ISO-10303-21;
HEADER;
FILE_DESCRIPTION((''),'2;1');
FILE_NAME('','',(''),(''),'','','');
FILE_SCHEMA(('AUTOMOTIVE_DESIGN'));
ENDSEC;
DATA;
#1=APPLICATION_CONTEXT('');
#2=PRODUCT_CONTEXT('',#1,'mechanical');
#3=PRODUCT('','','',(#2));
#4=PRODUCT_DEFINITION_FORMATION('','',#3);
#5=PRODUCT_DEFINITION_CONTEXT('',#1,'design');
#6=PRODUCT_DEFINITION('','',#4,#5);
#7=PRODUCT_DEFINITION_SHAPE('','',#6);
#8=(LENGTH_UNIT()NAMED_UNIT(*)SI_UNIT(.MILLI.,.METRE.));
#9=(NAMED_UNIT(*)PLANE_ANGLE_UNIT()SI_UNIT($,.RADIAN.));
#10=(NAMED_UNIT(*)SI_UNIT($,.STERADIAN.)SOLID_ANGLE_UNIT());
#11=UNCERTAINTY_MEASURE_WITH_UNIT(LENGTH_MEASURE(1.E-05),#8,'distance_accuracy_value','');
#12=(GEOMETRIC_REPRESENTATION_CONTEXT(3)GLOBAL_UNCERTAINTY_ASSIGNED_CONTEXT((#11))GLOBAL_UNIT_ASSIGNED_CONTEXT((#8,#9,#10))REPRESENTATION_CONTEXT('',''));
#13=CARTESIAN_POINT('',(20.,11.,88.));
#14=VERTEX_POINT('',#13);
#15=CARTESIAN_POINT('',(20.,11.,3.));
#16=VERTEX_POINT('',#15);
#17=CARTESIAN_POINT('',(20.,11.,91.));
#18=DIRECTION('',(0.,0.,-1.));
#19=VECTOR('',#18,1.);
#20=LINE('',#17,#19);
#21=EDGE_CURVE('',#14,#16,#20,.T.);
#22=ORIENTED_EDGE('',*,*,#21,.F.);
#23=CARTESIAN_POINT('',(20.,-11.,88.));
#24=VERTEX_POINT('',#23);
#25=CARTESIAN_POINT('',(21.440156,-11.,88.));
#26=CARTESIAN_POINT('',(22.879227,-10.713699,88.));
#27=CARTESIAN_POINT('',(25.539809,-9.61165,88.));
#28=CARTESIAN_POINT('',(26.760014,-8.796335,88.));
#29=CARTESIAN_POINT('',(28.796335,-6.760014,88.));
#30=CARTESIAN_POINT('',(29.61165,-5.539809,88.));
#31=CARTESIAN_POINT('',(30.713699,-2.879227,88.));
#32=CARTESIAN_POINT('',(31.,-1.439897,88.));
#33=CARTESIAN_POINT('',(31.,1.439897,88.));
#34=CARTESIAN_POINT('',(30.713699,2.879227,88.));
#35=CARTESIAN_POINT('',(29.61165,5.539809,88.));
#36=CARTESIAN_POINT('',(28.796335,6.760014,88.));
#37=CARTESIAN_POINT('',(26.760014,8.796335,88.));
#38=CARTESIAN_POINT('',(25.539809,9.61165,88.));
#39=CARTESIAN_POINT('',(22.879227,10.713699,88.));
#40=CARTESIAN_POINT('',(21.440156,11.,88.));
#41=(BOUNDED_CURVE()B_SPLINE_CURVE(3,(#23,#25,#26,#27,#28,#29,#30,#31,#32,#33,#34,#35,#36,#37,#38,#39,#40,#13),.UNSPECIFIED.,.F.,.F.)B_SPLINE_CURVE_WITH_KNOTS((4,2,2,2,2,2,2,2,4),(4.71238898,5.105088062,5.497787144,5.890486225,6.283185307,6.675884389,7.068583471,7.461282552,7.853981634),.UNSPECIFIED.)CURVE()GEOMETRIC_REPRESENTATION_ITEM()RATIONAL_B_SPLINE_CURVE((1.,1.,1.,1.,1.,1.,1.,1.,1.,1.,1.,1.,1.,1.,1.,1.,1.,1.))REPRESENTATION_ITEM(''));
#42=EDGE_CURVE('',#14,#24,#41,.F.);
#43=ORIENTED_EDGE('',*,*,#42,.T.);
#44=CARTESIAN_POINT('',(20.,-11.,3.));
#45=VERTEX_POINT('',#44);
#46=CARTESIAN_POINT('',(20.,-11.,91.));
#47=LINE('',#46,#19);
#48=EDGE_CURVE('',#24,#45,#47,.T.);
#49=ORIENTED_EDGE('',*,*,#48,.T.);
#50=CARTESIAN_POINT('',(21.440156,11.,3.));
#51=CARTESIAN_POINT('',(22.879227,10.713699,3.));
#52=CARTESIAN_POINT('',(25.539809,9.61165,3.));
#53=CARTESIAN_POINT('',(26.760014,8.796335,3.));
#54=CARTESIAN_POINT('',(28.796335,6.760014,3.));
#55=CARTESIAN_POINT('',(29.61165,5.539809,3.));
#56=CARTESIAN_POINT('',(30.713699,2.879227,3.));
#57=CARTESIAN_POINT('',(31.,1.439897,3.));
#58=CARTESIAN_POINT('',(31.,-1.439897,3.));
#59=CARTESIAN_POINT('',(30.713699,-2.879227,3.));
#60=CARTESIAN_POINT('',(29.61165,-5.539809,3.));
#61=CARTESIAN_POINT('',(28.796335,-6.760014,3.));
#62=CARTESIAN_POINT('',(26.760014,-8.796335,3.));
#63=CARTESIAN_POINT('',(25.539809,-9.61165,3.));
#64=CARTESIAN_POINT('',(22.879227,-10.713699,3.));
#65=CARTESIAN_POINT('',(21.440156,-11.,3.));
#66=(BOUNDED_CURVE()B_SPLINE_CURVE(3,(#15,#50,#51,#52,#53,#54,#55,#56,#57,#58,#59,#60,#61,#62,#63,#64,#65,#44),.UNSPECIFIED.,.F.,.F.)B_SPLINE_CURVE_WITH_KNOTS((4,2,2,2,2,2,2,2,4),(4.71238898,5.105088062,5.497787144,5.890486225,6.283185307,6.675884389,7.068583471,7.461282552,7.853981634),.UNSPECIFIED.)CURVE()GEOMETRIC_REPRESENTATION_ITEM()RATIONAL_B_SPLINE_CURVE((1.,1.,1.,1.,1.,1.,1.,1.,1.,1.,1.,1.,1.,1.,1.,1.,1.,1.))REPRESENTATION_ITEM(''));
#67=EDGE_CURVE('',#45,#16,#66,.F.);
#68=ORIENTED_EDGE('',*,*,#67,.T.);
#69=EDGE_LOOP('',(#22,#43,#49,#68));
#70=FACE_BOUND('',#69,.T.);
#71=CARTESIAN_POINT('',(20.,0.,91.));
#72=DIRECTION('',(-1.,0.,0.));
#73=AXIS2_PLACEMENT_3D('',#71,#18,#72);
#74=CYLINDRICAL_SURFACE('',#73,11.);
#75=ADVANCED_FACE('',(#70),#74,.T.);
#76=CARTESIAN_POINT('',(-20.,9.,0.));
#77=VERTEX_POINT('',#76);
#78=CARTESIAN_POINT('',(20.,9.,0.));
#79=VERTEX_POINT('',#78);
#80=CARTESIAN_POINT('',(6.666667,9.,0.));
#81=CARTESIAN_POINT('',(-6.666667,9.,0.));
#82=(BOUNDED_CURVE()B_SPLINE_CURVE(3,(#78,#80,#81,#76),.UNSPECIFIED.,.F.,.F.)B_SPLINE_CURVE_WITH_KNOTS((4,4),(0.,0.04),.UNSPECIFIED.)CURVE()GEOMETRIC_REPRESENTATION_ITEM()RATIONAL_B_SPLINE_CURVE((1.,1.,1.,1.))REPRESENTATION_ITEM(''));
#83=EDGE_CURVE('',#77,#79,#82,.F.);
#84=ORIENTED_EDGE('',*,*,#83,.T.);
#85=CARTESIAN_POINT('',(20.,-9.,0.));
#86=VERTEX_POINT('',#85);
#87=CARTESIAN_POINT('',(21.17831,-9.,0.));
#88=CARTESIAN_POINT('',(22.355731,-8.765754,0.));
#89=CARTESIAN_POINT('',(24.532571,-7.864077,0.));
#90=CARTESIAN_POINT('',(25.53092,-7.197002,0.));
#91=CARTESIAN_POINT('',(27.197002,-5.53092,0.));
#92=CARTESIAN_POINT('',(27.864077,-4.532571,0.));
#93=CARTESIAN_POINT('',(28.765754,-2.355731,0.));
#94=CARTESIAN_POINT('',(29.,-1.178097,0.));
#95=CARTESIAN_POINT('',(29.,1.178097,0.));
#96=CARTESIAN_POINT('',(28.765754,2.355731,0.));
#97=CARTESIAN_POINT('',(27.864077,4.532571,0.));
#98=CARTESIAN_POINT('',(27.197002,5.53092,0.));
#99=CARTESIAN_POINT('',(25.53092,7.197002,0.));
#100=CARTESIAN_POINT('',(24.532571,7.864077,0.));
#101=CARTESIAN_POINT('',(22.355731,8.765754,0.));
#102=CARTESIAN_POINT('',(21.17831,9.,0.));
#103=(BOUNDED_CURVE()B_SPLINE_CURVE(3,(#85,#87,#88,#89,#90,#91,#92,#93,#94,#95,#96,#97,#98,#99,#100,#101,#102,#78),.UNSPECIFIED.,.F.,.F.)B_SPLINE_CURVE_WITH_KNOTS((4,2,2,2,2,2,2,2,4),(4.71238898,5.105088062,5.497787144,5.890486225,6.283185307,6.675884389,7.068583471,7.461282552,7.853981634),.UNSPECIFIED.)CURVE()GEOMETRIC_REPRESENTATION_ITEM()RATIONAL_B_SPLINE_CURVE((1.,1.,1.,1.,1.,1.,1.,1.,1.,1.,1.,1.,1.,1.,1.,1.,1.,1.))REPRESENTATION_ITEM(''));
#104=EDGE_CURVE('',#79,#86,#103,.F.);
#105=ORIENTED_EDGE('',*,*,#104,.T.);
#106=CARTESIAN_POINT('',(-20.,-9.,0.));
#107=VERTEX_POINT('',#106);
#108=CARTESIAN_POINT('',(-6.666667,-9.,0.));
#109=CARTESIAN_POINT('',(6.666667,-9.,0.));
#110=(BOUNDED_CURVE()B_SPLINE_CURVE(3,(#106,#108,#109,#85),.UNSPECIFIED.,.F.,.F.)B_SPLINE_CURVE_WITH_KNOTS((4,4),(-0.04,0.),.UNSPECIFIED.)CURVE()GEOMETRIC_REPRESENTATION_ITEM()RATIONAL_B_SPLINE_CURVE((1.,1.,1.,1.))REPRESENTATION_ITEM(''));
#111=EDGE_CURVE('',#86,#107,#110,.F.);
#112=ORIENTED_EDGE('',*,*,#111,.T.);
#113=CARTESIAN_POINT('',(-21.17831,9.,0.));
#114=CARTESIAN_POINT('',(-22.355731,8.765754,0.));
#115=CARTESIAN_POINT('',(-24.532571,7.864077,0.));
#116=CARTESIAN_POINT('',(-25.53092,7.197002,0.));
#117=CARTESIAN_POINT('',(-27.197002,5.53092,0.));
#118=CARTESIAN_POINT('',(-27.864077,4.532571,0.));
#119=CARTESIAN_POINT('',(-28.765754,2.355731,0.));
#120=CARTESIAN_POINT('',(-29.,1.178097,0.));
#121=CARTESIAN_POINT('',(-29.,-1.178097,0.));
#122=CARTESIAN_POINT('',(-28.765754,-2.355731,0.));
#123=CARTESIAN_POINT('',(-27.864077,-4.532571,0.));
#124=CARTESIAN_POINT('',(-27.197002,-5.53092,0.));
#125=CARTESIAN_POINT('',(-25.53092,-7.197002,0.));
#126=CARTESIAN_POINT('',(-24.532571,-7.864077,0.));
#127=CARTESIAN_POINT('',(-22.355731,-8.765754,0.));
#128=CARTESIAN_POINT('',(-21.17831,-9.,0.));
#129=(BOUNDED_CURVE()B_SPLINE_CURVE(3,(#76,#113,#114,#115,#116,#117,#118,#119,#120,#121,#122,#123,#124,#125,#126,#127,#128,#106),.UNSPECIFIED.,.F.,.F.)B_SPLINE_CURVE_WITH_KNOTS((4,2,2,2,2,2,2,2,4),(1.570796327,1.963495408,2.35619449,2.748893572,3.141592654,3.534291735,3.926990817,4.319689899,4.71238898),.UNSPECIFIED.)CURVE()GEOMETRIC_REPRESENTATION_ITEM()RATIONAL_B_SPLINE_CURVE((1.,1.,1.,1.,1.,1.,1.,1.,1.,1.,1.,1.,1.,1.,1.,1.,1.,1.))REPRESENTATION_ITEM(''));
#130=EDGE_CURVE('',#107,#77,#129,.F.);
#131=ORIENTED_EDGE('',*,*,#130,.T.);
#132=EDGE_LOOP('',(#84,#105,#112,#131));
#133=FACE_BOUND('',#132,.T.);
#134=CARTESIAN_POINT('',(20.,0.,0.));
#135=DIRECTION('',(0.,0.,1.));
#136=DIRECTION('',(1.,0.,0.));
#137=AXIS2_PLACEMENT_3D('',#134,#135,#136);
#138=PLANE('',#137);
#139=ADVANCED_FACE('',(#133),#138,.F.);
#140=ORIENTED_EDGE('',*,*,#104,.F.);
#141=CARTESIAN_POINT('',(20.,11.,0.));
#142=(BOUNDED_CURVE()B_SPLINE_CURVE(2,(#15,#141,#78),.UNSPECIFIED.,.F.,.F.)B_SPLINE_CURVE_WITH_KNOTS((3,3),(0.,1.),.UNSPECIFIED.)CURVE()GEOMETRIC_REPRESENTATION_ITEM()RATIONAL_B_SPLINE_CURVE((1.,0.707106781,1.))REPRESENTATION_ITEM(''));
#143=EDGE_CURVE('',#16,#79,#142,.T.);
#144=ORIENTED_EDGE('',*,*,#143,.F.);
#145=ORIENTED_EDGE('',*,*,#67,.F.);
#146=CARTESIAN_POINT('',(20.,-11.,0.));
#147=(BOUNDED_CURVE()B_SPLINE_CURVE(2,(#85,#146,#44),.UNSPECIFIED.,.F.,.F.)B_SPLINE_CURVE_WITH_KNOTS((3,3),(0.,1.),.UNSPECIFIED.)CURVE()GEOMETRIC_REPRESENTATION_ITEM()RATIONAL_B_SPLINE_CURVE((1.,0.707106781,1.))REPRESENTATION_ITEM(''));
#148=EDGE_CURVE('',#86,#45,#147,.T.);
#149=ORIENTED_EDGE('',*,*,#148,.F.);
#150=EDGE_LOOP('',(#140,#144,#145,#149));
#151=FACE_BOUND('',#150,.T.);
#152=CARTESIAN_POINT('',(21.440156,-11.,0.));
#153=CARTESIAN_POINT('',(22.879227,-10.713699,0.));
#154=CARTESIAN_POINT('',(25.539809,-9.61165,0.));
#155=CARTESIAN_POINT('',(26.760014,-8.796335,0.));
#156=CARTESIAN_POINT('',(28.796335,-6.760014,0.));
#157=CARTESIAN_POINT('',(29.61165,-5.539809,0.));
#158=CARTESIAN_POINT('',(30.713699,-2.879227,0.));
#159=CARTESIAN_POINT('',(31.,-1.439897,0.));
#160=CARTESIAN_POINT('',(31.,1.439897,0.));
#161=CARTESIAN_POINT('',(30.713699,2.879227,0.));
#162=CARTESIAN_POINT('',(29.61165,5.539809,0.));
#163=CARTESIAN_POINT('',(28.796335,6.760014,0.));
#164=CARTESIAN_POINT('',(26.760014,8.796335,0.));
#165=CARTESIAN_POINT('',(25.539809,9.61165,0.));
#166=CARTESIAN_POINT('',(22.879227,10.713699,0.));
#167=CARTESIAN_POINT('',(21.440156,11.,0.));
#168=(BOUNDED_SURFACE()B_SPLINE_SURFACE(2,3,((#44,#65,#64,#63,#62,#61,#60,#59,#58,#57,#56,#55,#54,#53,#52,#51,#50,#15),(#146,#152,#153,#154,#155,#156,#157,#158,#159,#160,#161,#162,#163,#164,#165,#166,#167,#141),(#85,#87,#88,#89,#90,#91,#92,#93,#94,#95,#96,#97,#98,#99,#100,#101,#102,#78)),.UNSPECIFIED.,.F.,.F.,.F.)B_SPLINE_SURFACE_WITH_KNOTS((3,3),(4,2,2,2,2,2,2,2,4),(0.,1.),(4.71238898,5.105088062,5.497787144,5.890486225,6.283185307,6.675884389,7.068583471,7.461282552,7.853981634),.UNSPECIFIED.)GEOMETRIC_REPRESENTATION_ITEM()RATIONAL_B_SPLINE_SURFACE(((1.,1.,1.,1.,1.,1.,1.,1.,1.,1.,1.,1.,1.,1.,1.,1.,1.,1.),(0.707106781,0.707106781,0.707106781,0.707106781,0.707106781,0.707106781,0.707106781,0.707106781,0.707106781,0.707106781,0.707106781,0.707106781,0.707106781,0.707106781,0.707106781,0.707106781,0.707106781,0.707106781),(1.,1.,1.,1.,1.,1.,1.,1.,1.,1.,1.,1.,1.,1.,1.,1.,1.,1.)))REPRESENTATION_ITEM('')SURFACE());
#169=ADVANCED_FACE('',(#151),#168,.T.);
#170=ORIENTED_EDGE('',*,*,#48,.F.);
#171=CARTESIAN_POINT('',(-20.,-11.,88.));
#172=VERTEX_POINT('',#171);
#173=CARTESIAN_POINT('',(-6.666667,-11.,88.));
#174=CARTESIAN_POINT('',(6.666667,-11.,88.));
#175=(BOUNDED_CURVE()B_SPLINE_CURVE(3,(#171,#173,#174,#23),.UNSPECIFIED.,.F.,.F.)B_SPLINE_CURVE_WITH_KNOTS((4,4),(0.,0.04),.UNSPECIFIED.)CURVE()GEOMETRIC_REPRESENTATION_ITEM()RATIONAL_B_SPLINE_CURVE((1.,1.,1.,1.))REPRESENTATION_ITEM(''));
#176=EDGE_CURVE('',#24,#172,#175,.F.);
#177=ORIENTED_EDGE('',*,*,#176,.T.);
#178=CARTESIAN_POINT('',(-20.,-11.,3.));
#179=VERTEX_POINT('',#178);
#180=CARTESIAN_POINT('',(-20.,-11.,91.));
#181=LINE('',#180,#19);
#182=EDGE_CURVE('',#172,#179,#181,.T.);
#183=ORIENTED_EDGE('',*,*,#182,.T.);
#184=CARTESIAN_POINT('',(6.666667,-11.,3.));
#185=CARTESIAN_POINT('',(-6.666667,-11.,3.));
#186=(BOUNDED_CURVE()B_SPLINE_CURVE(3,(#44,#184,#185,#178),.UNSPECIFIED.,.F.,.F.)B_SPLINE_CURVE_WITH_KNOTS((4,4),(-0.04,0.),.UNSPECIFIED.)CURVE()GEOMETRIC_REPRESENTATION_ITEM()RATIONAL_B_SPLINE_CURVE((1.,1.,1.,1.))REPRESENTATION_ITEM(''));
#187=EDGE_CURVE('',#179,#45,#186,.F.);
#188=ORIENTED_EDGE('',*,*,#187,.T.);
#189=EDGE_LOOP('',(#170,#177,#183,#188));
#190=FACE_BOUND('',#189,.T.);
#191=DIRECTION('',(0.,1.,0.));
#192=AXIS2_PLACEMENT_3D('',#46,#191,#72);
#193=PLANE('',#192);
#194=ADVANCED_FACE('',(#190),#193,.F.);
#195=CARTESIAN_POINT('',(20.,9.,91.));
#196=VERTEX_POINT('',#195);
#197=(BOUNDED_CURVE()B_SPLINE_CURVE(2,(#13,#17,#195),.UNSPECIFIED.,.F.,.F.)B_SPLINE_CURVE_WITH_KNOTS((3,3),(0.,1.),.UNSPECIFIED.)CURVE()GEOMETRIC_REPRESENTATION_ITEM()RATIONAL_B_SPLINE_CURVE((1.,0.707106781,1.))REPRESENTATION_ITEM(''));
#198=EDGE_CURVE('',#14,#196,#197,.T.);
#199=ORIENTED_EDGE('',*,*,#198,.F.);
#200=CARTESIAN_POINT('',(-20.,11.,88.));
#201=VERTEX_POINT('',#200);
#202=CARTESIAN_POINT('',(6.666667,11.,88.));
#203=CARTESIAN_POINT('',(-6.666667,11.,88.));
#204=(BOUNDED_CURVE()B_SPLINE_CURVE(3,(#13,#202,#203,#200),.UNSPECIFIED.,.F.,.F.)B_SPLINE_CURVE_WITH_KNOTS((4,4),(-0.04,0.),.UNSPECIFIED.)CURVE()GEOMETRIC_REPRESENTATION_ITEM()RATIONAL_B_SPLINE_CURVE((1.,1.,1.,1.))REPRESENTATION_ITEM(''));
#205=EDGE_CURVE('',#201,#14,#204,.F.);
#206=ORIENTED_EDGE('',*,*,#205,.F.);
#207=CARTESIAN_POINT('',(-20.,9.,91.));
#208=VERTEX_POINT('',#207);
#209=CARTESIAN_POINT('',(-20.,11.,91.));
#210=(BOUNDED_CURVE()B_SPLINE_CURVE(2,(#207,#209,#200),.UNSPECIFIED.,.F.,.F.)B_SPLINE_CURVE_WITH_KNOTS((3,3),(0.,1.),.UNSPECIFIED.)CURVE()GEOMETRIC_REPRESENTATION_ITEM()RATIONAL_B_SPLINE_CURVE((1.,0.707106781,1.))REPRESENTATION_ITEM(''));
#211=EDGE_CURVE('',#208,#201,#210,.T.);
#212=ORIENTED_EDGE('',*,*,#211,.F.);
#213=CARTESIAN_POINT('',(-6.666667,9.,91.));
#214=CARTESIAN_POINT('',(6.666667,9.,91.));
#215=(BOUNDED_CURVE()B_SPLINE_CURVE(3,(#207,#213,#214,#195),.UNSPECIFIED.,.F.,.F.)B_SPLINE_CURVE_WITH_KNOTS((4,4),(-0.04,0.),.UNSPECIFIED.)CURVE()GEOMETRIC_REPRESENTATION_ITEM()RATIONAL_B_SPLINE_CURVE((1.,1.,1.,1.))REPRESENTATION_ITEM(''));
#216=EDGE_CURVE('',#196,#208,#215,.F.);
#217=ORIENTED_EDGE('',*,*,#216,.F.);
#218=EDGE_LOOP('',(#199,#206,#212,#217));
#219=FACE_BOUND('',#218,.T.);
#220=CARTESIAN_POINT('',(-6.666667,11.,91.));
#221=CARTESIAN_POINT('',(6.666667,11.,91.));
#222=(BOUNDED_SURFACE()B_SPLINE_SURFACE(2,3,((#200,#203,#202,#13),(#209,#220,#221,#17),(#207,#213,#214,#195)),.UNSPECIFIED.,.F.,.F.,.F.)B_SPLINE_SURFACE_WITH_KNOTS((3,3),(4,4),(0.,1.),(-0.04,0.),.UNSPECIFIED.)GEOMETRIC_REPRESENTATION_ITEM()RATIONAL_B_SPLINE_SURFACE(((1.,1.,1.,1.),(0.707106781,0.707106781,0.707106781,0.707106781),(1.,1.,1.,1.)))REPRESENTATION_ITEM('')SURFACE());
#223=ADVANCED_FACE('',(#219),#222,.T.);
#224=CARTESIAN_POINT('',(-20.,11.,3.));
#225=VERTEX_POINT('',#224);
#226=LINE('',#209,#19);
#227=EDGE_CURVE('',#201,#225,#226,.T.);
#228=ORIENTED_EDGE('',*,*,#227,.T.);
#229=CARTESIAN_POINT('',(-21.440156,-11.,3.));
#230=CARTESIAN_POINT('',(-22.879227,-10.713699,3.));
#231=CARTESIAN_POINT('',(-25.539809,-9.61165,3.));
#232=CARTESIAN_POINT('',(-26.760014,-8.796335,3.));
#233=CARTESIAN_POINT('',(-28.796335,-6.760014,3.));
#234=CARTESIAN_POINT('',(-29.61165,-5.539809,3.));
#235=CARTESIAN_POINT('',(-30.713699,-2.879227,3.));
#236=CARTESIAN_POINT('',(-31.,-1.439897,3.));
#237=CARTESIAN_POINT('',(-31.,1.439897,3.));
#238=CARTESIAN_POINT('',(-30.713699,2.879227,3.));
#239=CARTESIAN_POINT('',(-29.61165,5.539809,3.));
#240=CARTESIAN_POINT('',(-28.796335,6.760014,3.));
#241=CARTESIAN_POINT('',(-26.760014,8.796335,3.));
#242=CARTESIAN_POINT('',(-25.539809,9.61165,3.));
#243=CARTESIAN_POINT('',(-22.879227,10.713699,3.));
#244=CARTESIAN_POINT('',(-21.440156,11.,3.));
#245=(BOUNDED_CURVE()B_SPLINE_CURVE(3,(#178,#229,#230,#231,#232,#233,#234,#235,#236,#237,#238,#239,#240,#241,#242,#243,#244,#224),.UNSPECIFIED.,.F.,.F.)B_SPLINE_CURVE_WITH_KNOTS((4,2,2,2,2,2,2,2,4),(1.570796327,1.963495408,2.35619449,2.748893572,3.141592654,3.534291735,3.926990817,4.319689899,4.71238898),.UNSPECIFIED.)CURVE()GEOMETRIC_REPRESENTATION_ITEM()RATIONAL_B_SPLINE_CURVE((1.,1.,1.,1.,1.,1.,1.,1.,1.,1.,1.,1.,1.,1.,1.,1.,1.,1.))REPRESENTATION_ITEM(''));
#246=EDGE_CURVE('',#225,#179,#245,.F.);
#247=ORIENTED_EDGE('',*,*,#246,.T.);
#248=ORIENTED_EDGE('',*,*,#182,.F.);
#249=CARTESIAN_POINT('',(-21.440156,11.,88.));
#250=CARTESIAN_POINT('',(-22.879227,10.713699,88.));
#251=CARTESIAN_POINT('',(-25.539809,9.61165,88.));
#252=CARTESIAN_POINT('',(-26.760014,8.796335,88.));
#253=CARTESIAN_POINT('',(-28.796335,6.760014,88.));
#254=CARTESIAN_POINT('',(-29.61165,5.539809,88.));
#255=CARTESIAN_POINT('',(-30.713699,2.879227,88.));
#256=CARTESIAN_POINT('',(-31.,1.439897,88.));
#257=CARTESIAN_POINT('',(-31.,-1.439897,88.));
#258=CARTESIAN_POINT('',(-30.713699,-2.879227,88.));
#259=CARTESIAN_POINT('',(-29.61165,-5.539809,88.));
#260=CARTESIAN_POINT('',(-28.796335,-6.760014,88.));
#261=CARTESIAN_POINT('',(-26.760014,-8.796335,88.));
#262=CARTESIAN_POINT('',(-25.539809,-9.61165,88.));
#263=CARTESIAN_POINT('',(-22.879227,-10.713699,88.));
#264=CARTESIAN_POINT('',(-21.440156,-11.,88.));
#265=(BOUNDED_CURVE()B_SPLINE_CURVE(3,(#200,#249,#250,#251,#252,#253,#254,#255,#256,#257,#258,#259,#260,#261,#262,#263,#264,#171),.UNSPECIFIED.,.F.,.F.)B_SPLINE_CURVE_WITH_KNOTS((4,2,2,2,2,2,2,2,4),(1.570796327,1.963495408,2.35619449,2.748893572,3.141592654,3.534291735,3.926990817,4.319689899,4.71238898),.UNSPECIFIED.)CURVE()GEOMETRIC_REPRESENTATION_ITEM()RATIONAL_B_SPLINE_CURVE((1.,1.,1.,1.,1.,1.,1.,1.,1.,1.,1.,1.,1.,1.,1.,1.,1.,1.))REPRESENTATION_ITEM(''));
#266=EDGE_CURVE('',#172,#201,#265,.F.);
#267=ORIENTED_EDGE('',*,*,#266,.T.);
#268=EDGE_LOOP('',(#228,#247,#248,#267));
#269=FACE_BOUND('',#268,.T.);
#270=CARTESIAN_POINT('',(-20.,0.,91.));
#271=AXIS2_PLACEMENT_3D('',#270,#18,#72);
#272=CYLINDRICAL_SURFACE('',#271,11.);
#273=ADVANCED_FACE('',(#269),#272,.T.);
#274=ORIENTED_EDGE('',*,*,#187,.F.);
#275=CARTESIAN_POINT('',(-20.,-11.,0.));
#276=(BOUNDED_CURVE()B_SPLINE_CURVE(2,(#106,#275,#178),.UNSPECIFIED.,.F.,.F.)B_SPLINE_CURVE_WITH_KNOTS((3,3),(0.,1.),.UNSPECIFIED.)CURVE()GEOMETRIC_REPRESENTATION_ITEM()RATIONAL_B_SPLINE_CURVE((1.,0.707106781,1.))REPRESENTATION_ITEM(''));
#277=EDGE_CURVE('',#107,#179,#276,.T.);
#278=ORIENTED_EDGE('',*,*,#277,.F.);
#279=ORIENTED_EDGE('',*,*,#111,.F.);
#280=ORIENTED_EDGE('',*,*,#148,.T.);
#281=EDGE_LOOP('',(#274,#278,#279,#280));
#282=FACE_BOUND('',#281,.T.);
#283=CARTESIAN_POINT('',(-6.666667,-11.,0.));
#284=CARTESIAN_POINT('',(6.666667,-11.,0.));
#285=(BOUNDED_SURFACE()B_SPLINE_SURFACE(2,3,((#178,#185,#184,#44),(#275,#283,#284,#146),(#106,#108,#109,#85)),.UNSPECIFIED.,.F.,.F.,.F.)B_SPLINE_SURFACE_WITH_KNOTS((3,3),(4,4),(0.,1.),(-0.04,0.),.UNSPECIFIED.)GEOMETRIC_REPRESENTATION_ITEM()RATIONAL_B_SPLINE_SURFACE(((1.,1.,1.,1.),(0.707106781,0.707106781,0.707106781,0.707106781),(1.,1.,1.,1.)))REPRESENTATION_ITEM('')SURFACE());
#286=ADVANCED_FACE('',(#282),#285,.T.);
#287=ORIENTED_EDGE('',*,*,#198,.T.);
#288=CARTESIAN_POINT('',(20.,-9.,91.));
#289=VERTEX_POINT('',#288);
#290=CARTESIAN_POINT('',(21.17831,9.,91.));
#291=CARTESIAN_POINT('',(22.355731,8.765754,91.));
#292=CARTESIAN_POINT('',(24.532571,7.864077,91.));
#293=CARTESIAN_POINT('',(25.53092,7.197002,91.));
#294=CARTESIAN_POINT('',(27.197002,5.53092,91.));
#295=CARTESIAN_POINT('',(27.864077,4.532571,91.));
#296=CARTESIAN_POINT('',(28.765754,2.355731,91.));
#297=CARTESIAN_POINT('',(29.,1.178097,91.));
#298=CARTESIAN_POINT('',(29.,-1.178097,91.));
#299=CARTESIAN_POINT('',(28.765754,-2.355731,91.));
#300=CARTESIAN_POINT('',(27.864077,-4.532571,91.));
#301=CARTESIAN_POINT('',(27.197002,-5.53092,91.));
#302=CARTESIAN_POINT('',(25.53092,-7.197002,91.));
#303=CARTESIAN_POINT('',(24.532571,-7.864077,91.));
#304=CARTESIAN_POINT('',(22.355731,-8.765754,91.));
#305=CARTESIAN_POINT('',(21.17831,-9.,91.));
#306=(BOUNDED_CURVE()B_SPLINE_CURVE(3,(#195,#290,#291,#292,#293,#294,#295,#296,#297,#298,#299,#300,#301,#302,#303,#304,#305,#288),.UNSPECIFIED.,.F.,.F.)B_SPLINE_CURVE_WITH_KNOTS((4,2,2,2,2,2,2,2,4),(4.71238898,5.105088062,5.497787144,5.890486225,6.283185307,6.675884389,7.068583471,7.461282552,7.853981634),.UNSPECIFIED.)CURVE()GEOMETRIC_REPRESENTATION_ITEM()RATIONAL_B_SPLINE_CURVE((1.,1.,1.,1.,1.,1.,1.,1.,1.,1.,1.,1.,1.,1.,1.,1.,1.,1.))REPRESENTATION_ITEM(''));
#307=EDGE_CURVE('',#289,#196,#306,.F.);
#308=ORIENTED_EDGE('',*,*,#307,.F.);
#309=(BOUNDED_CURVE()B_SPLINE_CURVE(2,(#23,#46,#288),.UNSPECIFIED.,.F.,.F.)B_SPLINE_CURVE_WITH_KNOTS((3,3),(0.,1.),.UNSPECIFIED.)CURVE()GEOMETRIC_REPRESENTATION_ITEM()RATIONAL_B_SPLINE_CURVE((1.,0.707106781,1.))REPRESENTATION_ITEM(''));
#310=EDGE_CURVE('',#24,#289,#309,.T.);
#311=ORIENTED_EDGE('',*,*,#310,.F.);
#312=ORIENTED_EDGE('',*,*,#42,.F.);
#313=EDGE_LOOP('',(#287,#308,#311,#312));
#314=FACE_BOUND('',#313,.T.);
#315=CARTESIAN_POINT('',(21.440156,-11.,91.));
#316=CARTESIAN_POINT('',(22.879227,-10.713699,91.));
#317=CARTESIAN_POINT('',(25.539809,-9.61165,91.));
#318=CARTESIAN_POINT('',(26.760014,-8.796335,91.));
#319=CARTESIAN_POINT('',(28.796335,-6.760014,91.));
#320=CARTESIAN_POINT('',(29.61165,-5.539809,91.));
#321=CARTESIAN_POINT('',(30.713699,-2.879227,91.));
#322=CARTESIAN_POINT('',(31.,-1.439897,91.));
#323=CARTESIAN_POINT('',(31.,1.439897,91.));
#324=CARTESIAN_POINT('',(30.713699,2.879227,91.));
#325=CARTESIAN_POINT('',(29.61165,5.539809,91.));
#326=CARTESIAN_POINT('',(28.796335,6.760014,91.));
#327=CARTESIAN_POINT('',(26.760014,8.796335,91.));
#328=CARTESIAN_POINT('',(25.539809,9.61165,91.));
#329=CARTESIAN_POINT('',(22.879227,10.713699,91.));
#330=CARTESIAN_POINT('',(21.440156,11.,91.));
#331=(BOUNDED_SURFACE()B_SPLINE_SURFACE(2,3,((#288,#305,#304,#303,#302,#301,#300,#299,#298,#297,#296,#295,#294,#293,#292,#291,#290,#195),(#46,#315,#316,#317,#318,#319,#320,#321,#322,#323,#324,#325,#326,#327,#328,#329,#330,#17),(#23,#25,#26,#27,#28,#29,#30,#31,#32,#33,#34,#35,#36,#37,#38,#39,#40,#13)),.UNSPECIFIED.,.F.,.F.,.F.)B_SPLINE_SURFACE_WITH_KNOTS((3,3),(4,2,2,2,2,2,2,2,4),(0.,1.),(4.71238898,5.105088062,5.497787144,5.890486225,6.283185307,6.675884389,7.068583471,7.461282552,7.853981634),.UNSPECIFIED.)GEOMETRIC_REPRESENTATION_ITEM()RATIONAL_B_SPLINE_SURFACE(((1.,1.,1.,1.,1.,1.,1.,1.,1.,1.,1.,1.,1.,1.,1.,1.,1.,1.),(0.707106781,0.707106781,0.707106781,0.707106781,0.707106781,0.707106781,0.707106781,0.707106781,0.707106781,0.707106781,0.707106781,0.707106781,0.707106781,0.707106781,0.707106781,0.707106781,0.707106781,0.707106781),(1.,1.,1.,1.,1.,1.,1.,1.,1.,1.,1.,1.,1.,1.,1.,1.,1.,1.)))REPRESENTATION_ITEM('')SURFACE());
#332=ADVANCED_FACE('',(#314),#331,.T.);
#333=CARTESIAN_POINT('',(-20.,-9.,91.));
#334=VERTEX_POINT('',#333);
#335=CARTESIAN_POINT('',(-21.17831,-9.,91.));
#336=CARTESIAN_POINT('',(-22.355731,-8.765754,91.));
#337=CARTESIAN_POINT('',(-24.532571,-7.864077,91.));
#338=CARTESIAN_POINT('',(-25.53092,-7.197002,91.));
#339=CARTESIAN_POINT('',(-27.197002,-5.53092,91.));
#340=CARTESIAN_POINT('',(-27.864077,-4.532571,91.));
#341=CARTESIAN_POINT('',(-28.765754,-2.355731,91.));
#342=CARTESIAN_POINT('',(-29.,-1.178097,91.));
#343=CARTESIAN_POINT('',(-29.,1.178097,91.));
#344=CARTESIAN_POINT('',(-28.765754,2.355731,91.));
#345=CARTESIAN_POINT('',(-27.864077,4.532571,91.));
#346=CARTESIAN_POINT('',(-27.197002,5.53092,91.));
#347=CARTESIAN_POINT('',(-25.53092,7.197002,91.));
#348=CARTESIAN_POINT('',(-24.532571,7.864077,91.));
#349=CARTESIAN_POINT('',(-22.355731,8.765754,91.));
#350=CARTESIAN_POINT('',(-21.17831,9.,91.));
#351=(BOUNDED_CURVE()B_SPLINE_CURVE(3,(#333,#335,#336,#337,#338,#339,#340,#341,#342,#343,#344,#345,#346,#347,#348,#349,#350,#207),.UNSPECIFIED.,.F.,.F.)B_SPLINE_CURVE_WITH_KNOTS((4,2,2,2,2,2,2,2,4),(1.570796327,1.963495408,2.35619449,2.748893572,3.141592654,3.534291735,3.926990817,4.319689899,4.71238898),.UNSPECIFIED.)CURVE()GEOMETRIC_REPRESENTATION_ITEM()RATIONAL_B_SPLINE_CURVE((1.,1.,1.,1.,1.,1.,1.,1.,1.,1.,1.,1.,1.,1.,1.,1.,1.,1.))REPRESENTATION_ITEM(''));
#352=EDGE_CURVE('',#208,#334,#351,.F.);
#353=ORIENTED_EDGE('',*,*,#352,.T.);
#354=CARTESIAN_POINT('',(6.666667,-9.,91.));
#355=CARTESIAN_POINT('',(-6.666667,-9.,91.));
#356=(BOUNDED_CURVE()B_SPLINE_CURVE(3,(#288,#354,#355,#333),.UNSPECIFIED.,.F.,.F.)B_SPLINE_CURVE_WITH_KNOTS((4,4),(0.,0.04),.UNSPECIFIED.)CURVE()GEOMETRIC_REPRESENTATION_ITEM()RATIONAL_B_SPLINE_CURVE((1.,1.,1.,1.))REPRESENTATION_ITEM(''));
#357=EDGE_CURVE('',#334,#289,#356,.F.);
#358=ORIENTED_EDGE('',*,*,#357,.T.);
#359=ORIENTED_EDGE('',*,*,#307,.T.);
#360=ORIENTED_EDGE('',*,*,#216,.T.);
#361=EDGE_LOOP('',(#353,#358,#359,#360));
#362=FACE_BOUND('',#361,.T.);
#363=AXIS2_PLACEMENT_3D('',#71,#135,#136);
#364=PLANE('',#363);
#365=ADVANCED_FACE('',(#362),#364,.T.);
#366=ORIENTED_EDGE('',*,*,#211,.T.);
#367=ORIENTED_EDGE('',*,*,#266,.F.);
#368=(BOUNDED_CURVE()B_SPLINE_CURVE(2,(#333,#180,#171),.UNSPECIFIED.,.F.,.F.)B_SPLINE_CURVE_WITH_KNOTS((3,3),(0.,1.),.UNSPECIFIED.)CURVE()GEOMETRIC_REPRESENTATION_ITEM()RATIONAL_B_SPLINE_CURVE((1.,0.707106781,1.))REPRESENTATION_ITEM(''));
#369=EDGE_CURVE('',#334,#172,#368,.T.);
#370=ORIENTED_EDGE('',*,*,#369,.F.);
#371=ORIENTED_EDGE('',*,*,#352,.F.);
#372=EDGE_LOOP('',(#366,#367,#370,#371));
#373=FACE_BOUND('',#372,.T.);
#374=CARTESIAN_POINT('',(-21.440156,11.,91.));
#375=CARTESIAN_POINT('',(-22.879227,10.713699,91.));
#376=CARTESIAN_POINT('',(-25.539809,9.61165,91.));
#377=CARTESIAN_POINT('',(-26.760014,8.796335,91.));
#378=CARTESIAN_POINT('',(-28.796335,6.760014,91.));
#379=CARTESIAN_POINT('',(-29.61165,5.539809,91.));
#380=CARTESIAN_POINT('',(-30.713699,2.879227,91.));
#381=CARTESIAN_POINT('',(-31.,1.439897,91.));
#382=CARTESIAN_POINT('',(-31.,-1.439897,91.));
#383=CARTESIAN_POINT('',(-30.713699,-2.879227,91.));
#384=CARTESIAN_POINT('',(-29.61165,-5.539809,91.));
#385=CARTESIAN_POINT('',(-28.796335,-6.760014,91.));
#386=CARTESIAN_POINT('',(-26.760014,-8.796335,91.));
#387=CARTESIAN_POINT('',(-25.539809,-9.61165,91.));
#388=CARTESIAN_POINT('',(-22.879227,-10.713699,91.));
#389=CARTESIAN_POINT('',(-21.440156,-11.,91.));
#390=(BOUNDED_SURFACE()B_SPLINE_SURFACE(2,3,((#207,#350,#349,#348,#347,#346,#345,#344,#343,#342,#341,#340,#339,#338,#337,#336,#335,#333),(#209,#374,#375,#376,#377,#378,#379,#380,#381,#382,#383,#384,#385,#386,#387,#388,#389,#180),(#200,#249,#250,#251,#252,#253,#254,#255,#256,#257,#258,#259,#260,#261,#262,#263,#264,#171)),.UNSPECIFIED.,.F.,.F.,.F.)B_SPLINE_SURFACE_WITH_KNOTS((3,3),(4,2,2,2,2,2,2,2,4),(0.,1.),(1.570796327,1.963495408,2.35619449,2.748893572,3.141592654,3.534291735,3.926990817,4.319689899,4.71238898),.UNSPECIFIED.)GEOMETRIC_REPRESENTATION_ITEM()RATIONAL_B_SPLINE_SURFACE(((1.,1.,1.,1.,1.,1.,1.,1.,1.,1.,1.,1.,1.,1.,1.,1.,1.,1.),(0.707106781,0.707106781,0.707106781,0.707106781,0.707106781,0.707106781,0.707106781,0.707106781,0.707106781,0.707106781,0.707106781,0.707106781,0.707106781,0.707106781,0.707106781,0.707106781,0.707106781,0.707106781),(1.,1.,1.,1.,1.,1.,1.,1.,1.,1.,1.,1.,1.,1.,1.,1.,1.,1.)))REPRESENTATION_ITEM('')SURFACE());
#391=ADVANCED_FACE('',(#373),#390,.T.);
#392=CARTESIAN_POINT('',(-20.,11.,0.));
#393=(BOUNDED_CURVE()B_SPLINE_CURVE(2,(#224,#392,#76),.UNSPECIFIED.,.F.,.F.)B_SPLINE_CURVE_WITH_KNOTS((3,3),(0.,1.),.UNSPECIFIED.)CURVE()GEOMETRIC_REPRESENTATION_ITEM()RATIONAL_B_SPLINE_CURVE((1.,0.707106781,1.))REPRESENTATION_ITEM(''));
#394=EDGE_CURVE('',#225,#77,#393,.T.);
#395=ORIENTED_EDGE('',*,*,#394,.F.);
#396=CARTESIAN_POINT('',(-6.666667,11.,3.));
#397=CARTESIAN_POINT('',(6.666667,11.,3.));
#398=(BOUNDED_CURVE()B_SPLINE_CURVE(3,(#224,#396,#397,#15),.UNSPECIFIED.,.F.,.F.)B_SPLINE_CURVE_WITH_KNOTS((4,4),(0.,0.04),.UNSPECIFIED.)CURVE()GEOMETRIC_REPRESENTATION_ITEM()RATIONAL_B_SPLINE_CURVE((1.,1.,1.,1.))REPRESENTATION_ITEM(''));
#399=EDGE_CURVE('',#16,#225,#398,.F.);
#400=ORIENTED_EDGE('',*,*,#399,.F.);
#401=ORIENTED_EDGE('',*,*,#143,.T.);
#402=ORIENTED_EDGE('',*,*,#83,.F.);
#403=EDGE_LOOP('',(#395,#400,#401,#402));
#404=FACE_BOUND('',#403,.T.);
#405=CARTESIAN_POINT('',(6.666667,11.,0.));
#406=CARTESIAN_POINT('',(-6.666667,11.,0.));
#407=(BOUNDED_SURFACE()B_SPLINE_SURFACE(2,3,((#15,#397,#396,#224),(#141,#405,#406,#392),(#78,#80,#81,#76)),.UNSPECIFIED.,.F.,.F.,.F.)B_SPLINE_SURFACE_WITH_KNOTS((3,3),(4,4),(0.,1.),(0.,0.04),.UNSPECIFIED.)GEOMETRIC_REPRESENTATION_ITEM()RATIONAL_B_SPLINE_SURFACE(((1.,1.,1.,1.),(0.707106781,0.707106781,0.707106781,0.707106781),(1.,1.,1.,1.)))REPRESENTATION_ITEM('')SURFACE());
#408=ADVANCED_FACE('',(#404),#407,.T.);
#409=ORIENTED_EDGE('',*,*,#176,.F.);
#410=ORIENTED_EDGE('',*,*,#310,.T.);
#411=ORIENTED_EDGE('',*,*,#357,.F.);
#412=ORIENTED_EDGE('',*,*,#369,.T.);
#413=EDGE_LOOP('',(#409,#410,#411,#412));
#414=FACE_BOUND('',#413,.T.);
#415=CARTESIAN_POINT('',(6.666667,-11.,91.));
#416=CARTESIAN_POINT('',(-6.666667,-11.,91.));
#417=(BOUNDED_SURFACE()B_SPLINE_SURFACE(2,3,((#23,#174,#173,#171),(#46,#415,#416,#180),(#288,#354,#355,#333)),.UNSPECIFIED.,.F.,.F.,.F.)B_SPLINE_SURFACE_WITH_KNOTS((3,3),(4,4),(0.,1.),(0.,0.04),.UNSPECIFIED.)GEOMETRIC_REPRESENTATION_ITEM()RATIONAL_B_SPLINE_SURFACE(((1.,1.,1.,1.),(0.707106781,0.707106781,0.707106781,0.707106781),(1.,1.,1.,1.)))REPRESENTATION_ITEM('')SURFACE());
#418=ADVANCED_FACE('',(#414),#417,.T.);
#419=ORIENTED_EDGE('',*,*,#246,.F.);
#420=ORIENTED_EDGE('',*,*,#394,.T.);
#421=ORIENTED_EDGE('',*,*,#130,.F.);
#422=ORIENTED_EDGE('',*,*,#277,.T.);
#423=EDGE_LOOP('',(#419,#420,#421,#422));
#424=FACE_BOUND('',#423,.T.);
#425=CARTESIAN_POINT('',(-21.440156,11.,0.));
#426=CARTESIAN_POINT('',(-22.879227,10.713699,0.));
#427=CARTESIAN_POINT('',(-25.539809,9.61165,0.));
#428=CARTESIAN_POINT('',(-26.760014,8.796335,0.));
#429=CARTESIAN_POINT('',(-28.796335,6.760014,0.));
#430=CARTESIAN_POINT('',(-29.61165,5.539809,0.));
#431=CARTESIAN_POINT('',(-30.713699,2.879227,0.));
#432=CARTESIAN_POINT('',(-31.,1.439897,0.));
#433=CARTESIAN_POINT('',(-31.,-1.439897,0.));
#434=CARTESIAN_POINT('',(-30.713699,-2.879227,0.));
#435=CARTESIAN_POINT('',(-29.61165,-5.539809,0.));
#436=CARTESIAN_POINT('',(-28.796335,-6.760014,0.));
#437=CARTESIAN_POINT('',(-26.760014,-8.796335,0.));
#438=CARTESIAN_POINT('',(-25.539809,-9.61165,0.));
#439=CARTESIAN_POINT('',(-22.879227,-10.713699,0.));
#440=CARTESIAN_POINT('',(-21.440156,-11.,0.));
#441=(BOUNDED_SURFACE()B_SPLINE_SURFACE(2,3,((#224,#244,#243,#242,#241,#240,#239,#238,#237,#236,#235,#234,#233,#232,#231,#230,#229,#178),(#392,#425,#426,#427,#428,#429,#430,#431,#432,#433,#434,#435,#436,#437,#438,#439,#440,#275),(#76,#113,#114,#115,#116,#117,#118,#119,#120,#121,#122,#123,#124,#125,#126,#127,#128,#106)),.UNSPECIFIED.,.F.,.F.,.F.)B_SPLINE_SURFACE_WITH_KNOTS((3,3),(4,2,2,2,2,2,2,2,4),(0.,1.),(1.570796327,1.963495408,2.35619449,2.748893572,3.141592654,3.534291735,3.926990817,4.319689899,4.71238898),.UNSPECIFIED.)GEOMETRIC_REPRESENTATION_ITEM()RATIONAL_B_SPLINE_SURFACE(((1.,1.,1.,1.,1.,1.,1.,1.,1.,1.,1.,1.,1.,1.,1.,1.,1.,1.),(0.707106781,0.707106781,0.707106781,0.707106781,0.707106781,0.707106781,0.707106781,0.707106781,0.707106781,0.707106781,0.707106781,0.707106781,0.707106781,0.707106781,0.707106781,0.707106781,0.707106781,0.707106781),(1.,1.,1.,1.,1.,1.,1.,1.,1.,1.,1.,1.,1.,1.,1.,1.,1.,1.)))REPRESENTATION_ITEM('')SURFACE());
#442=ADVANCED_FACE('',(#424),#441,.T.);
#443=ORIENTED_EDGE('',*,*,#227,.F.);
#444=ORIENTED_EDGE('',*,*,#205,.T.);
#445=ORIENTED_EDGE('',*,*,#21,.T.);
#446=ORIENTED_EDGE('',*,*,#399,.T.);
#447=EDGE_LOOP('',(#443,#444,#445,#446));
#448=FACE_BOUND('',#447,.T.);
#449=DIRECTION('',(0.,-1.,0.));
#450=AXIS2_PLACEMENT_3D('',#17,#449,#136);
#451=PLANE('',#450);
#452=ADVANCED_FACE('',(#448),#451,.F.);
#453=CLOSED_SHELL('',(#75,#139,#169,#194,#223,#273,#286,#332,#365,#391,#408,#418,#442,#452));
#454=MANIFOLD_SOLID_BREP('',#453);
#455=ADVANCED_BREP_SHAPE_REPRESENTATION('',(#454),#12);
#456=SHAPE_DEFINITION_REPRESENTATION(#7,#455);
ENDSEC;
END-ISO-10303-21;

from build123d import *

# Parameters (mm, degrees)
EXTRUDE_1_DEPTH = 91
FILLET_1_SIZE   = 3
FILLET_1_SIZE_2 = 2
FILLET_2_SIZE   = 3
FILLET_2_SIZE_2 = 2


with BuildPart() as part:
    # ｽｹｯﾁ1 → ﾎﾞｽ - 押し出し1 (new body)
    with BuildSketch(Plane.XY):
        with BuildLine():
            Line((20, -11), (-20, -11))
            ThreePointArc((-20, -11), (-31, 0), (-20, 11))
            Line((-20, 11), (20, 11))
            ThreePointArc((20, 11), (31, 0), (20, -11))
        make_face()
    extrude(amount=EXTRUDE_1_DEPTH)

    # ﾌｨﾚｯﾄ1
    # an asymmetric fillet: 3, 2 mm, written as the material it takes off along each edge
    with BuildSketch(Plane(origin=(20, -11, 91), x_dir=(0, 0, -1), z_dir=(-1, 0, 0)), Plane(origin=(-20, 11, 91), x_dir=(0, 0, -1), z_dir=(1, 0, 0))) as fillet_1_piece_1:
        with BuildLine():
            Bezier((FILLET_1_SIZE, 0), (0, 0), (0, -FILLET_1_SIZE_2), weights=[1, 0.707106781, 1])
            Line((0, -FILLET_1_SIZE_2), (0, 0))
            Line((0, 0), (FILLET_1_SIZE, 0))
        make_face()
    extrude(amount=40, mode=Mode.SUBTRACT)
    with BuildSketch(Plane(origin=(20, 0, 91), x_dir=(0, 1, 0), z_dir=(-1, 0, 0))) as fillet_1_piece_2:
        with BuildLine():
            Bezier((11, FILLET_1_SIZE), (11, 0), (11 - FILLET_1_SIZE_2, 0), weights=[1, 0.707106781, 1])
            Line((11 - FILLET_1_SIZE_2, 0), (11, 0))
            Line((11, 0), (11, FILLET_1_SIZE))
        make_face()
    revolve(axis=Axis((20, 0, 91), (0, 0, -1)), revolution_arc=180, mode=Mode.SUBTRACT)
    with BuildSketch(Plane(origin=(-20, 0, 91), x_dir=(0, -1, 0), z_dir=(1, 0, 0))) as fillet_1_piece_3:
        with BuildLine():
            Bezier((11, FILLET_1_SIZE), (11, 0), (11 - FILLET_1_SIZE_2, 0), weights=[1, 0.707106781, 1])
            Line((11 - FILLET_1_SIZE_2, 0), (11, 0))
            Line((11, 0), (11, FILLET_1_SIZE))
        make_face()
    revolve(axis=Axis((-20, 0, 91), (0, 0, -1)), revolution_arc=180, mode=Mode.SUBTRACT)

    # ﾌｨﾚｯﾄ2
    # an asymmetric fillet: 3, 2 mm, written as the material it takes off along each edge
    with BuildSketch(Plane(origin=(20, -11, 0), x_dir=(0, 0, 1), z_dir=(-1, 0, 0))) as fillet_2_piece_1:
        with BuildLine():
            Bezier((FILLET_2_SIZE, 0), (0, 0), (0, FILLET_2_SIZE_2), weights=[1, 0.707106781, 1])
            Line((0, FILLET_2_SIZE_2), (0, 0))
            Line((0, 0), (FILLET_2_SIZE, 0))
        make_face()
    extrude(amount=40, mode=Mode.SUBTRACT)
    with BuildSketch(Plane(origin=(-20, 0, 0), x_dir=(0, -1, 0), z_dir=(1, 0, 0))) as fillet_2_piece_2:
        with BuildLine():
            Bezier((11 - FILLET_2_SIZE_2, 0), (11, 0), (11, -FILLET_2_SIZE), weights=[1, 0.707106781, 1])
            Line((11, -FILLET_2_SIZE), (11, 0))
            Line((11, 0), (11 - FILLET_2_SIZE_2, 0))
        make_face()
    revolve(axis=Axis((-20, 0, 0), (0, 0, -1)), revolution_arc=180, mode=Mode.SUBTRACT)
    with BuildSketch(Plane(origin=(-20, 11, 0), x_dir=(0, -1, 0), z_dir=(1, 0, 0))) as fillet_2_piece_3:
        with BuildLine():
            Bezier((FILLET_2_SIZE_2, 0), (0, 0), (0, -FILLET_2_SIZE), weights=[1, 0.707106781, 1])
            Line((0, -FILLET_2_SIZE), (0, 0))
            Line((0, 0), (FILLET_2_SIZE_2, 0))
        make_face()
    extrude(amount=40, mode=Mode.SUBTRACT)
    with BuildSketch(Plane(origin=(20, 0, 0), x_dir=(0, 1, 0), z_dir=(-1, 0, 0))) as fillet_2_piece_4:
        with BuildLine():
            Bezier((11 - FILLET_2_SIZE_2, 0), (11, 0), (11, -FILLET_2_SIZE), weights=[1, 0.707106781, 1])
            Line((11, -FILLET_2_SIZE), (11, 0))
            Line((11, 0), (11 - FILLET_2_SIZE_2, 0))
        make_face()
    revolve(axis=Axis((20, 0, 0), (0, 0, -1)), revolution_arc=180, mode=Mode.SUBTRACT)


solid = part.part
